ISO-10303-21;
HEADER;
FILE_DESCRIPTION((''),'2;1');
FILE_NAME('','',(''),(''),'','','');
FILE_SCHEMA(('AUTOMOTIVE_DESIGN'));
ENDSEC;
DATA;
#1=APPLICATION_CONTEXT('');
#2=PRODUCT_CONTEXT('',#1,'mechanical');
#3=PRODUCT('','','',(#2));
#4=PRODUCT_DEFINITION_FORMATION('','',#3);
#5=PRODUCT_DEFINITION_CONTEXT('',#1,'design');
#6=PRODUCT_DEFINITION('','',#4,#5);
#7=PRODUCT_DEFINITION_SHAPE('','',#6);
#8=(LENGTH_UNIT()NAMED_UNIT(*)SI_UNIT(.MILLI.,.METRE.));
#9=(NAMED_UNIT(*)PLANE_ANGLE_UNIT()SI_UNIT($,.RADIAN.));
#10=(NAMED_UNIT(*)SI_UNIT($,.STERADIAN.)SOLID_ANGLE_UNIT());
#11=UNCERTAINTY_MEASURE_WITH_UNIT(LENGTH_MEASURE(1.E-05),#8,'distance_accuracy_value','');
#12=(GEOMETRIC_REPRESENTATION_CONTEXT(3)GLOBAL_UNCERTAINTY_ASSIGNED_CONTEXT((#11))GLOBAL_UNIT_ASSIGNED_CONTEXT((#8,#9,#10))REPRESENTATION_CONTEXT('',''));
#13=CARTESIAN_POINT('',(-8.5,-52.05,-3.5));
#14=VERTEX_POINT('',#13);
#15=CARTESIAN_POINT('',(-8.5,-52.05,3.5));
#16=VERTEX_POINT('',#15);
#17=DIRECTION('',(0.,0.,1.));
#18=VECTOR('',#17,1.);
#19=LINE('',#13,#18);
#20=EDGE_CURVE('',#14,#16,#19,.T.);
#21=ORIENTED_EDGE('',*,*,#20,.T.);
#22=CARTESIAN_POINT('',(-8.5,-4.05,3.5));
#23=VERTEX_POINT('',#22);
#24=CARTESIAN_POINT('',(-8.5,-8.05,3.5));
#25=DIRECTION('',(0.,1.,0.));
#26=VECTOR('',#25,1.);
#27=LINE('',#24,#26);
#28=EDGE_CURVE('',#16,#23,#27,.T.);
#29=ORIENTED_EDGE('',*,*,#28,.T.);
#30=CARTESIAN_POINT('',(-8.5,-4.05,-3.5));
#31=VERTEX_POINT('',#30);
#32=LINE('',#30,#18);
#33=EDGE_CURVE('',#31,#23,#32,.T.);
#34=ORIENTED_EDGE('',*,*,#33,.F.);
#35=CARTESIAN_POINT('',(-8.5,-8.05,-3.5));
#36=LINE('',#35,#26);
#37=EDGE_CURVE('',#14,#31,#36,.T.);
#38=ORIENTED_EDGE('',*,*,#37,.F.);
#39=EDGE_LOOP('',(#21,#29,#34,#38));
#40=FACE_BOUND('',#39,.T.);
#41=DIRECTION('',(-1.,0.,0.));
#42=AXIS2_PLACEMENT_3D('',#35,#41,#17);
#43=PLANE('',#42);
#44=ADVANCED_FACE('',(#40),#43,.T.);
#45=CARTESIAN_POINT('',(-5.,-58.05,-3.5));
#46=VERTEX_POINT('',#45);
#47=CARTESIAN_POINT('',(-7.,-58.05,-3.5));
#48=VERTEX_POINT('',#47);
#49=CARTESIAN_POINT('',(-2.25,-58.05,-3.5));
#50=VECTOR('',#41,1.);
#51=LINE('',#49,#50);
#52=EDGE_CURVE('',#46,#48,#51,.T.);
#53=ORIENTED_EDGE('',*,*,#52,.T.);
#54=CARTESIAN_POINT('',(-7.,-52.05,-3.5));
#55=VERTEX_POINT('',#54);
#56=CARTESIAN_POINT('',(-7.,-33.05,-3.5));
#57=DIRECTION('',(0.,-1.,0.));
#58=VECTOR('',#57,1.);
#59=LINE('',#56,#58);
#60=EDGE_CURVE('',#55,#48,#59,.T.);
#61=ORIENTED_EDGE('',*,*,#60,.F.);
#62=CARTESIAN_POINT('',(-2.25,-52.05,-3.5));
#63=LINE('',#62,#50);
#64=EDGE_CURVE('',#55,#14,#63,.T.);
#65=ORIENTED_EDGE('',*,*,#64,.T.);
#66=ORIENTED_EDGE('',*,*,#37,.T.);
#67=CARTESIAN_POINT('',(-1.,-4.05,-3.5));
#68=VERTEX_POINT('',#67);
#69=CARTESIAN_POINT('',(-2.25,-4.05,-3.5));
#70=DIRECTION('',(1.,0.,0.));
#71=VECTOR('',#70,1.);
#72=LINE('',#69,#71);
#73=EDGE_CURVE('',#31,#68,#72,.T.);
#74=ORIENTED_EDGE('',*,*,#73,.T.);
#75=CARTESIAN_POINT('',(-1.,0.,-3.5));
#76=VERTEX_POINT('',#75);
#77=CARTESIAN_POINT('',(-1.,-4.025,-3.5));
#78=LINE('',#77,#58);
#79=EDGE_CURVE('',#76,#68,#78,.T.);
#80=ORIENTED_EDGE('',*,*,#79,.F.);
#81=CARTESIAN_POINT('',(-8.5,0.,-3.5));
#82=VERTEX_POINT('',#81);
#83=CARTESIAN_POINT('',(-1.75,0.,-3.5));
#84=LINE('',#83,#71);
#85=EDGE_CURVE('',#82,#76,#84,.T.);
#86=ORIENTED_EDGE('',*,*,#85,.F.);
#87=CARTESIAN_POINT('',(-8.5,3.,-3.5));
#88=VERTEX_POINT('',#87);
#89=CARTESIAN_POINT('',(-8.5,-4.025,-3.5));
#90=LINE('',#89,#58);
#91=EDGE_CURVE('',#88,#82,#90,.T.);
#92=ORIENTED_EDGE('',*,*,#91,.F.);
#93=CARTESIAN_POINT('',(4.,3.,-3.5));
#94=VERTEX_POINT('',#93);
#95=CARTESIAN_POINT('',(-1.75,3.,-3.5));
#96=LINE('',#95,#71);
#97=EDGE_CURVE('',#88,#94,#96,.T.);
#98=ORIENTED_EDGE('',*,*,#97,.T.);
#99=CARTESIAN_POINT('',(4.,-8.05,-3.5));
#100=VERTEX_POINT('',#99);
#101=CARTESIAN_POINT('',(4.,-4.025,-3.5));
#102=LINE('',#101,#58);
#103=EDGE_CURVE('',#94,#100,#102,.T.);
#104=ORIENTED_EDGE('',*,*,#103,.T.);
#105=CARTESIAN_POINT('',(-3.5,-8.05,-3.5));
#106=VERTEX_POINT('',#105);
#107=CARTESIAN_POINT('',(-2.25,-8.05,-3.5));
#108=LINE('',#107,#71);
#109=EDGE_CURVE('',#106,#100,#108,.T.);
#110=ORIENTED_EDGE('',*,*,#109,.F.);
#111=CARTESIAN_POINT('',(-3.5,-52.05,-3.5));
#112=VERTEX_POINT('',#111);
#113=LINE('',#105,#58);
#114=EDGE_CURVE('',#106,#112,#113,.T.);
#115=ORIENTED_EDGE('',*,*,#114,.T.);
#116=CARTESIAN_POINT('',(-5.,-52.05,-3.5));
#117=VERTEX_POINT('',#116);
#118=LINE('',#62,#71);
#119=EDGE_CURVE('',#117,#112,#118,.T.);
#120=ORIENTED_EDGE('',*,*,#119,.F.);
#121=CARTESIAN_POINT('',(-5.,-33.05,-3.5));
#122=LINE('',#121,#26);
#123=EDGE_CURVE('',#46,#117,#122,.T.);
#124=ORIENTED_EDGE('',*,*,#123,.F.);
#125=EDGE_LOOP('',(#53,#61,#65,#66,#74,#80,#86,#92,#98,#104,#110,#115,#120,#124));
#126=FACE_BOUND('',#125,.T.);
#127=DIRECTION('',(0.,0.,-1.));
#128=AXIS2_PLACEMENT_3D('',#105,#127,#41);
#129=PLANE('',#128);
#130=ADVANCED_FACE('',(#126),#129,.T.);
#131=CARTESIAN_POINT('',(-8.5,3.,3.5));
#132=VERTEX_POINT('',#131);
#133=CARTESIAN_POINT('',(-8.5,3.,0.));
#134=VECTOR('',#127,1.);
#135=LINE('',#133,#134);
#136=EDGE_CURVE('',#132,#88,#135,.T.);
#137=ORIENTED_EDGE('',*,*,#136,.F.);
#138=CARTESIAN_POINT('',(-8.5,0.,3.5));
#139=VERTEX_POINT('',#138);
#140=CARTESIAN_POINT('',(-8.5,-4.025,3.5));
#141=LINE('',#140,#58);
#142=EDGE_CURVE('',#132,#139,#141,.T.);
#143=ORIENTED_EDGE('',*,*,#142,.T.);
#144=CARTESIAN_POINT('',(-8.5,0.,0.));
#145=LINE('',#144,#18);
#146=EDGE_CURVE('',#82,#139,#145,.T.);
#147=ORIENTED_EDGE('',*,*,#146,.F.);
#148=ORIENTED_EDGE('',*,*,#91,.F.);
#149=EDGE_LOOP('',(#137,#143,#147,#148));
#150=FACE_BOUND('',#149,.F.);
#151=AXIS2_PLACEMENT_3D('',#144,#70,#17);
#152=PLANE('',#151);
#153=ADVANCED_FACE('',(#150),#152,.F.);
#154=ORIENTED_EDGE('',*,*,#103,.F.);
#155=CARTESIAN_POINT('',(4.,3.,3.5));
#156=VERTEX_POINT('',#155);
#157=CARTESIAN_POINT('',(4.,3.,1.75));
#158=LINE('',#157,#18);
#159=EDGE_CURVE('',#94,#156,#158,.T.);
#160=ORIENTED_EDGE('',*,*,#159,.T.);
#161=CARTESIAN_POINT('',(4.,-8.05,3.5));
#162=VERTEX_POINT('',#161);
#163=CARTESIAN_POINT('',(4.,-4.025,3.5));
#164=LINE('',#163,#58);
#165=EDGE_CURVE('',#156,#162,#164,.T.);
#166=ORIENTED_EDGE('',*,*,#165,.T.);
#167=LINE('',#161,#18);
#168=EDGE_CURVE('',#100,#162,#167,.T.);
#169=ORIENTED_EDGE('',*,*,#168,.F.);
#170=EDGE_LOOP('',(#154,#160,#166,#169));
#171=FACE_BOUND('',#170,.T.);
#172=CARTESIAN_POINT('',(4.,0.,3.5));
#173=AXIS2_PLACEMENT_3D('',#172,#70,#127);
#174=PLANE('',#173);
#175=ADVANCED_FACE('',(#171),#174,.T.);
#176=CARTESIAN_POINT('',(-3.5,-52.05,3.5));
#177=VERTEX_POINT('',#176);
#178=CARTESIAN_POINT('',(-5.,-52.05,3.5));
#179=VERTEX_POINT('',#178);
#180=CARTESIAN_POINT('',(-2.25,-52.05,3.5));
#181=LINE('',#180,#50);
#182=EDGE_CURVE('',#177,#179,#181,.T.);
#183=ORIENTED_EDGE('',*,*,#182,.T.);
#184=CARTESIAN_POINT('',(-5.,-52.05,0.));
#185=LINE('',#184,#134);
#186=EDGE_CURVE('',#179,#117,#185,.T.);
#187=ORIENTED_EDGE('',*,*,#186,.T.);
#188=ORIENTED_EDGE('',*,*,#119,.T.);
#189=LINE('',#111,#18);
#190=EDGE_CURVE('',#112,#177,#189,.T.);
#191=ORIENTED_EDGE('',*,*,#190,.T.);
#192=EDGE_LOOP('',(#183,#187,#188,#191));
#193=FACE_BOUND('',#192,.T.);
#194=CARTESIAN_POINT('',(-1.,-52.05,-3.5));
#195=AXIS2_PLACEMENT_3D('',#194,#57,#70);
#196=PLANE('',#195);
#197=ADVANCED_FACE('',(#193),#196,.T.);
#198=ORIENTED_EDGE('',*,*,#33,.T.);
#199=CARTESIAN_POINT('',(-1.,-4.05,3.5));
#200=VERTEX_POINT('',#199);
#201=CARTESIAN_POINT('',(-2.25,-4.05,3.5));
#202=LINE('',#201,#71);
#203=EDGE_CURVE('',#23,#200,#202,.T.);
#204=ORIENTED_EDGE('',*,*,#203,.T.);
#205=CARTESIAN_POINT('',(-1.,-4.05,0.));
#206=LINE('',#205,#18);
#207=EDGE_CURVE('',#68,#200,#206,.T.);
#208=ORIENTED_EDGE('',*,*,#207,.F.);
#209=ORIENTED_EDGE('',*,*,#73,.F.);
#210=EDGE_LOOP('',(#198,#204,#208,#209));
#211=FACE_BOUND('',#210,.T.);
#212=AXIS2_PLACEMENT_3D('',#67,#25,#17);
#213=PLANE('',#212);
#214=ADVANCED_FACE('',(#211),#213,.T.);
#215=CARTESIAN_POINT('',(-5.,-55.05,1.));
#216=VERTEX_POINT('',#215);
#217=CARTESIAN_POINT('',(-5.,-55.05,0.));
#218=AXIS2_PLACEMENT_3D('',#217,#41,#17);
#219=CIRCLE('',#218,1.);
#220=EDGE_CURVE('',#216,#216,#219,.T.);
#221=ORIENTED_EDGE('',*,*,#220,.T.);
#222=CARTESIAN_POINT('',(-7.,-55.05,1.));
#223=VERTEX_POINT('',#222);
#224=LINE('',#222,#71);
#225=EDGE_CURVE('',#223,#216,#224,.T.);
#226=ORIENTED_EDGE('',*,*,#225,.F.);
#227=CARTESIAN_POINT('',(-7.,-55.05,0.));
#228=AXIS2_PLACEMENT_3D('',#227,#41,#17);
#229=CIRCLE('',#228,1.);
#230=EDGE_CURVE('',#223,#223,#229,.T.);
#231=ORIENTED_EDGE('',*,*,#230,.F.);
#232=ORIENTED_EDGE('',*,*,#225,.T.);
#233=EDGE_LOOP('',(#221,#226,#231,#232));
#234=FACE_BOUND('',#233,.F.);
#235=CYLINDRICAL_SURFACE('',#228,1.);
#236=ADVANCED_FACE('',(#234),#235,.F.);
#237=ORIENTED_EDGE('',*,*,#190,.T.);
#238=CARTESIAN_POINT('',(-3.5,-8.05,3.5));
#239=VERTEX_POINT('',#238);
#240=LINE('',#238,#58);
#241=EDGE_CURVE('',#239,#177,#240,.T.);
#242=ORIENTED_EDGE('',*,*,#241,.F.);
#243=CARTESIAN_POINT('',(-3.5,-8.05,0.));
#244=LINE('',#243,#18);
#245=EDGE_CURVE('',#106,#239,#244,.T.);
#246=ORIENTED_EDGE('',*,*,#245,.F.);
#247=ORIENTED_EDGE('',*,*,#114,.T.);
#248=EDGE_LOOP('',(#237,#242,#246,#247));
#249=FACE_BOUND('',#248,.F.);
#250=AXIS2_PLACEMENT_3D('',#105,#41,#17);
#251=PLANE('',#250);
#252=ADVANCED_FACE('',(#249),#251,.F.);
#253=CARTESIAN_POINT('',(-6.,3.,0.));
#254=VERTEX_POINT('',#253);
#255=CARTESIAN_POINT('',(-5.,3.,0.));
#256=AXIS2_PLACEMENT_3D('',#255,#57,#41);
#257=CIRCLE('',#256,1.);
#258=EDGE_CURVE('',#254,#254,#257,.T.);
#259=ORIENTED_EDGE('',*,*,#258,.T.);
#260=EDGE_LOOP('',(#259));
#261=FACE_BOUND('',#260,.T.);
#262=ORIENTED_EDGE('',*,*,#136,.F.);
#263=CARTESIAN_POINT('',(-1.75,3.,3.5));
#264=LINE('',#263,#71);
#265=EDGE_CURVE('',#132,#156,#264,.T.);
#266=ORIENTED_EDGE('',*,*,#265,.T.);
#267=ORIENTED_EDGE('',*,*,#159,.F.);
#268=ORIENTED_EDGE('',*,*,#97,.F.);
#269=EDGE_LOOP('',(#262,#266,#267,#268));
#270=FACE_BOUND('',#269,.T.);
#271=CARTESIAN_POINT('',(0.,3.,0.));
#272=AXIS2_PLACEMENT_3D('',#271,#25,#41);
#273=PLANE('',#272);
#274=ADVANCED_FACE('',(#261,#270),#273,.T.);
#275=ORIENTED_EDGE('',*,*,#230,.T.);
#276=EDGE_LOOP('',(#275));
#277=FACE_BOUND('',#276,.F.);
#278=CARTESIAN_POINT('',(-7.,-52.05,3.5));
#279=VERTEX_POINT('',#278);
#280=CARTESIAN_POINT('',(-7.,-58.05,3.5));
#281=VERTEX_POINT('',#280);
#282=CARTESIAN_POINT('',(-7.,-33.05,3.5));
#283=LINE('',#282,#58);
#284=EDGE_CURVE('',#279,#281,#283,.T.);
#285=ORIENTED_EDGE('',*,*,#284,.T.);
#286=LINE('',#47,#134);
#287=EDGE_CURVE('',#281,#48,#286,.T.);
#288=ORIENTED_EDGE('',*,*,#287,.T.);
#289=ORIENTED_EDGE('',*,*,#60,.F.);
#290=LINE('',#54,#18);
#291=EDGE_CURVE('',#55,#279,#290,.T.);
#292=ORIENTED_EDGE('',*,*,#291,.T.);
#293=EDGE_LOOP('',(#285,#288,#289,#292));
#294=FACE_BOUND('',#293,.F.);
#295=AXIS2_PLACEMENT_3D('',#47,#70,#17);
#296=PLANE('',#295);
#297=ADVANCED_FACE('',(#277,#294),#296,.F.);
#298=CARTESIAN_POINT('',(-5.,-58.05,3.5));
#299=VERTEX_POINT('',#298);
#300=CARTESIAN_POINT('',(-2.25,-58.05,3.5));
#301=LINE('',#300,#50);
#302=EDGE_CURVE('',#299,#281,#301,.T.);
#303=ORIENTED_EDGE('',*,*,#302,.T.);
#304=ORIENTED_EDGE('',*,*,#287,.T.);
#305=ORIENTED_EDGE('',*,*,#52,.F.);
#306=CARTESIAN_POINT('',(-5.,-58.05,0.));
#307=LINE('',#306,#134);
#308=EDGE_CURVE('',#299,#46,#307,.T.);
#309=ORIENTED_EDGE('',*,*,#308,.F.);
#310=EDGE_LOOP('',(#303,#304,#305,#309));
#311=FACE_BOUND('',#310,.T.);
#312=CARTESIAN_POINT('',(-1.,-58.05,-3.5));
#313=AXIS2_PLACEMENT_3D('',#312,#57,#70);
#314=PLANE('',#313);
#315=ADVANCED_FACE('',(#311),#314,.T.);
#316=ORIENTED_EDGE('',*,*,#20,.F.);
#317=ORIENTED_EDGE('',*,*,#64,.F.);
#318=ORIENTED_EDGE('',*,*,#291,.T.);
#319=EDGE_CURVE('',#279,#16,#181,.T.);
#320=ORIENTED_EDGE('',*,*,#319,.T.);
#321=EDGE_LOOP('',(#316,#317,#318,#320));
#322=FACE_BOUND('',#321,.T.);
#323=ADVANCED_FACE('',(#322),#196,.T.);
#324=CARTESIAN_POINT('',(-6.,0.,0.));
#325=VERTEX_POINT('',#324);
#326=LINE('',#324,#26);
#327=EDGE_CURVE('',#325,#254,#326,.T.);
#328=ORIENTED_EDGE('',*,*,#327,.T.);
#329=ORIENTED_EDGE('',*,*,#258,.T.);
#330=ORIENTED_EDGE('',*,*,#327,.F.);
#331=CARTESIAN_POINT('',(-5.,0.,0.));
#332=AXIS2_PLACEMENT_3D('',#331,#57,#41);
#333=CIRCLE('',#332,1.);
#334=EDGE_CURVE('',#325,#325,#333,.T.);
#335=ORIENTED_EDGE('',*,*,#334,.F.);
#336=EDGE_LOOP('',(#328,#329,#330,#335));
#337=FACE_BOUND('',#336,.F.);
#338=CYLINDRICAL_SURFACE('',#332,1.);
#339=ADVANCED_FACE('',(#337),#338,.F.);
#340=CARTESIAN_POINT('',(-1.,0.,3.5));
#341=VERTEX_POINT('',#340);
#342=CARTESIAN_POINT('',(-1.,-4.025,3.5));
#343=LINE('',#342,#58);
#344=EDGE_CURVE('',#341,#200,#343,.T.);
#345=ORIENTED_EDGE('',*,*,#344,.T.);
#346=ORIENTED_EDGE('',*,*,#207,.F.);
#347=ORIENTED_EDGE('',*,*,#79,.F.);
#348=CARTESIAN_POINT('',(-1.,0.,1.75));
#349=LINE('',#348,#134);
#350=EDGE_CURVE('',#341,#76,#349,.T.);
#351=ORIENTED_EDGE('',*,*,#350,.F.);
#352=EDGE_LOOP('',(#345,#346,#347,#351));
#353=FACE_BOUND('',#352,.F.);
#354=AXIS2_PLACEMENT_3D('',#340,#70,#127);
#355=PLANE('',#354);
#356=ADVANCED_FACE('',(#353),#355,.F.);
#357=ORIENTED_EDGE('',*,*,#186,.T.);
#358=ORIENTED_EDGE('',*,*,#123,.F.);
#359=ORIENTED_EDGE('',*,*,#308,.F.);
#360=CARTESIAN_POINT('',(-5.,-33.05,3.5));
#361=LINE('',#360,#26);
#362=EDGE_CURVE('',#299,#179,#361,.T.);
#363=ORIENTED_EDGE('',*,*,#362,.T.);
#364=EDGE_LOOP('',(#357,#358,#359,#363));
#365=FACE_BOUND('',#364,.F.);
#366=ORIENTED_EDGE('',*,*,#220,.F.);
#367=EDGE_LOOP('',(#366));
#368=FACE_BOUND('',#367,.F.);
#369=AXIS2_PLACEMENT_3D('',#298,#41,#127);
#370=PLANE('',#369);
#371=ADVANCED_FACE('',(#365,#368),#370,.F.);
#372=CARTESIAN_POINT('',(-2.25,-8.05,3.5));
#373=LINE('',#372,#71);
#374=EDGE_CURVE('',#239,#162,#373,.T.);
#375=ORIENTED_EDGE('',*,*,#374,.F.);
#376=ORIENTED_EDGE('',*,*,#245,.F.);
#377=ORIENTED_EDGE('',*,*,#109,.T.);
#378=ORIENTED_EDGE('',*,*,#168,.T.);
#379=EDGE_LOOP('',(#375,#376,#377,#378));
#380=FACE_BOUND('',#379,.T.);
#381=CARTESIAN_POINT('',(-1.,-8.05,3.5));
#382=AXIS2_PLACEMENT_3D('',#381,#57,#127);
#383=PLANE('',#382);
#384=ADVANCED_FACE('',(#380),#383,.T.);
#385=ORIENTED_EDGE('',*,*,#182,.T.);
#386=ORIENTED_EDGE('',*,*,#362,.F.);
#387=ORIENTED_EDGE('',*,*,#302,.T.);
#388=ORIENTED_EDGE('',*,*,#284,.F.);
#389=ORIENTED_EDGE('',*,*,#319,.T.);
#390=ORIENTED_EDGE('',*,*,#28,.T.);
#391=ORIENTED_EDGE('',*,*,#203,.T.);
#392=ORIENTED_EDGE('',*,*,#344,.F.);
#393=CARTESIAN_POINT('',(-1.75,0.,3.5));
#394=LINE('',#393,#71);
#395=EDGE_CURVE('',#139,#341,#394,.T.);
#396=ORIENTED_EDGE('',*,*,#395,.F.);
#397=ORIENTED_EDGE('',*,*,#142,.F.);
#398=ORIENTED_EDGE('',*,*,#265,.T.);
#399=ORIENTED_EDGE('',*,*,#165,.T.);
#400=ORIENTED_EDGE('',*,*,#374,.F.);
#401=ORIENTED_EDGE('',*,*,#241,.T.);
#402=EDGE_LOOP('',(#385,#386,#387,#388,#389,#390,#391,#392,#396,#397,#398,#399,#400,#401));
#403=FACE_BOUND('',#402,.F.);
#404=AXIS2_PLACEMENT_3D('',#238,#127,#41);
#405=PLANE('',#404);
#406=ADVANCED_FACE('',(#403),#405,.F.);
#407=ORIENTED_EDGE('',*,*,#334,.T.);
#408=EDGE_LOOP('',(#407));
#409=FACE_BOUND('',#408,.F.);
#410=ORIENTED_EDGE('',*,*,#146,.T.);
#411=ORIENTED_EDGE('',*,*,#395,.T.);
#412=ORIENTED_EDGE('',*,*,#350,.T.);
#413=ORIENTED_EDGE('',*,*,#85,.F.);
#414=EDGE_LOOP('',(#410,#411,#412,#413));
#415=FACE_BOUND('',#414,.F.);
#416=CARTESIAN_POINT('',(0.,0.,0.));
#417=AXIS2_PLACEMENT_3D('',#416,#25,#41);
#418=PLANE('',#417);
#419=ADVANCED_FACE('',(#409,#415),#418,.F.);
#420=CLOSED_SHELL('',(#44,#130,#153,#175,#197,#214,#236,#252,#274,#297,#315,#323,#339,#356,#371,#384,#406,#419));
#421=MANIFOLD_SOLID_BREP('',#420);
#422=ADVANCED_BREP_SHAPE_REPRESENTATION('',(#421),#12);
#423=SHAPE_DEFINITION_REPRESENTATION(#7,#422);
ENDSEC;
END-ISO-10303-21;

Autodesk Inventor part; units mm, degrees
ref_plane "YZ Plane" through (0, 0, 0) normal (1, 0, 0) x (0, 1, 0)
ref_plane "XZ Plane" through (0, 0, 0) normal (0, 1, 0) x (-1, 0, 0)
ref_plane "XY Plane" through (0, 0, 0) normal (0, 0, 1) x (1, 0, 0)
sketch "Sketch1" plane through (0, 0, 0) normal (0, 1, 0) x (-1, 0, 0)
  line L0 (10, 3.5) -> (-4, 3.5)
  line L1 (-4, 3.5) -> (-4, -3.5)
  line L2 (-4, -3.5) -> (10, -3.5)
  line L3 (10, -3.5) -> (10, 3.5)
  line L4 (12.8, 0) -> (-6.8, 0) projected
  line L5 (0, -4.9) -> (0, 4.9) projected
  circle A0 centre (5, 0) radius 1
  dimension "d13" = 4
  dimension "d14" = 5
  dimension "d15" = 10
  dimension "d16" = 3.5
  dimension "d17" = 3.5
  dimension "d18" = 2
extrude "Extrusion4" add sketch "Sketch1" along normal blind 3 contours L3 L4 A0 L5 L0 | L5 L4 L1 L0 | L3 L2 L5 L4 A0 | L5 L2 L1 L4
sketch "Sketch3" plane through (0, 0, 0) normal (0, -1, 0) x (1, 0, 0)
  line L0 (4, -3.5) -> (-10, -3.5) projected
  line L1 (4, 3.5) -> (4, -3.5) projected
  line L2 (4, 3.5) -> (-1, 3.5)
  line L3 (-1, 3.5) -> (-1, -3.5)
  line L4 (-1, -3.5) -> (4, -3.5)
  line L5 (4, -3.5) -> (4, 3.5)
  point P0 (0, 0)
  dimension "d21" = 5
extrude "Extrusion5" add sketch "Sketch3" along normal blind 50
sketch "Sketch5" plane through (0, -50, 0) normal (0, -1, 0) x (1, 0, 0)
  line L0 (4, 3.5) -> (-1, 3.5) projected
  line L1 (-1, 3.5) -> (-1, -3.5) projected
  line L2 (-1, -3.5) -> (4, -3.5) projected
  line L3 (4, -3.5) -> (4, 3.5) projected
  line L4 (2.5, 3.5) -> (0.5, 3.5)
  line L5 (0.5, 3.5) -> (0.5, -3.5)
  line L6 (0.5, -3.5) -> (2.5, -3.5)
  line L7 (2.5, -3.5) -> (2.5, 3.5)
  point P0 (0, 0)
  dimension "d29" = 1.5
  dimension "d30" = 1.5
extrude "Extrusion7" add sketch "Sketch5" along normal blind 6 contours L7 L2 L5 L0
sketch "Sketch6" plane through (2.5, -50, 3.5) normal (1, 0, 0) x (0, 0, -1)
  circle A0 centre (3.5, -3) radius 1
  line L0 (7, 0) -> (0, 0) projected
  line L1 (0, 0) -> (0, -6) projected
  point P0 (3.5, 50)
  dimension "d34" = 2
  dimension "d35" = 3
  dimension "d36" = 3.5
extrude "Extrusion8" cut sketch "Sketch6" against normal through all
sketch "Sketch7" plane through (-1, 0, -3.5) normal (-1, 0, 0) x (0, 0, 1)
  line L0 (0, 0) -> (7, 0) projected
  line L1 (0, 0) -> (0, -50) projected
  line L2 (7, 0) -> (7, -50) projected
  line L3 (0, -4.05) -> (7, -4.05)
  line L4 (7, -4.05) -> (7, -8.05)
  line L5 (7, -8.05) -> (0, -8.05)
  line L6 (0, -8.05) -> (0, -4.05)
  point P0 (3.5, 0)
  dimension "d39" = 4.05
  dimension "d40" = 4
extrude "Extrusion9" add sketch "Sketch7" along normal blind 7.5 contours L3 L2 L5 L1
sketch "Sketch9" plane through (-1, -8.05, -3.5) normal (0, -1, 0) x (1, 0, 0)
  line L0 (0, 7) -> (-7.5, 7) projected
  line L1 (-7.5, 0) -> (-7.5, 7) projected
  line L2 (0, 0) -> (-7.5, 0) projected
  line L3 (-7.5, 0) -> (-2.5, 0)
  line L4 (-2.5, 0) -> (-2.5, 7)
  line L5 (-2.5, 7) -> (-7.5, 7)
  line L6 (-7.5, 7) -> (-7.5, 0)
  point P0 (1, 3.5)
  dimension "d43" = 5
extrude "Extrusion10" add sketch "Sketch9" along normal blind 50
sketch "Sketch10" plane through (-1, -50, -3.5) normal (-1, 0, 0) x (0, 0, 1)
  line L0 (7, 41.95) -> (0, 41.95) projected
  line L1 (0, 41.95) -> (0, 0) projected
  line L2 (7, 0) -> (0, 0) projected
  line L3 (7, 41.95) -> (7, 0) projected
  line L4 (0, 41.95) -> (10.2816, 41.95)
  line L5 (10.2816, 41.95) -> (10.2816, -15.7759)
  line L6 (10.2816, -15.7759) -> (0, -15.7759)
  line L7 (0, -15.7759) -> (0, 41.95)
  point P0 (3.5, 50)
extrude "Extrusion11" cut sketch "Sketch10" against normal blind 20
sketch "Sketch11" plane through (-1, -58.05, -3.5) normal (0, -1, 0) x (1, 0, 0)
  line L0 (-2.5, 7) -> (-7.5, 7) projected
  line L1 (-7.5, 7) -> (-7.5, 0) projected
  line L2 (-7.5, 0) -> (-2.5, 0) projected
  line L3 (-2.5, 0) -> (-2.5, 7) projected
  line L4 (-4, 0) -> (-6, 0)
  line L5 (-6, 0) -> (-6, 7)
  line L6 (-6, 7) -> (-4, 7)
  line L7 (-4, 7) -> (-4, 0)
  point P0 (1, 3.5)
  dimension "d48" = 1.5
  dimension "d49" = 1.5
extrude "Extrusion12" cut sketch "Sketch11" against normal blind 6 contours L3 L2 L7 L0 | L5 L2 L1 L0
sketch "Sketch12" plane through (-7, -58.05, -3.5) normal (-1, 0, 0) x (0, 0, 1)
  line L0 (7, 6) -> (7, 0) projected
  line L1 (7, 6) -> (0, 6) projected
  circle A0 centre (3.5, 3) radius 1
  point P0 (3.5, 58.05)
  dimension "d52" = 2
  dimension "d53" = 3.5
  dimension "d54" = 3
extrude "Extrusion13" cut sketch "Sketch12" against normal through all
thicken "Thicken1" operation add thickness 1 both sides no extend neighbours yes toward (1, 0, 0) faces at (-10, 1, -1.1667)
thicken "Thicken2" operation add thickness 0.5 both sides no extend neighbours yes toward (1, 0, 0) faces at (-9, 1, -1.1667)
properties part number "LD_holder_p3"
